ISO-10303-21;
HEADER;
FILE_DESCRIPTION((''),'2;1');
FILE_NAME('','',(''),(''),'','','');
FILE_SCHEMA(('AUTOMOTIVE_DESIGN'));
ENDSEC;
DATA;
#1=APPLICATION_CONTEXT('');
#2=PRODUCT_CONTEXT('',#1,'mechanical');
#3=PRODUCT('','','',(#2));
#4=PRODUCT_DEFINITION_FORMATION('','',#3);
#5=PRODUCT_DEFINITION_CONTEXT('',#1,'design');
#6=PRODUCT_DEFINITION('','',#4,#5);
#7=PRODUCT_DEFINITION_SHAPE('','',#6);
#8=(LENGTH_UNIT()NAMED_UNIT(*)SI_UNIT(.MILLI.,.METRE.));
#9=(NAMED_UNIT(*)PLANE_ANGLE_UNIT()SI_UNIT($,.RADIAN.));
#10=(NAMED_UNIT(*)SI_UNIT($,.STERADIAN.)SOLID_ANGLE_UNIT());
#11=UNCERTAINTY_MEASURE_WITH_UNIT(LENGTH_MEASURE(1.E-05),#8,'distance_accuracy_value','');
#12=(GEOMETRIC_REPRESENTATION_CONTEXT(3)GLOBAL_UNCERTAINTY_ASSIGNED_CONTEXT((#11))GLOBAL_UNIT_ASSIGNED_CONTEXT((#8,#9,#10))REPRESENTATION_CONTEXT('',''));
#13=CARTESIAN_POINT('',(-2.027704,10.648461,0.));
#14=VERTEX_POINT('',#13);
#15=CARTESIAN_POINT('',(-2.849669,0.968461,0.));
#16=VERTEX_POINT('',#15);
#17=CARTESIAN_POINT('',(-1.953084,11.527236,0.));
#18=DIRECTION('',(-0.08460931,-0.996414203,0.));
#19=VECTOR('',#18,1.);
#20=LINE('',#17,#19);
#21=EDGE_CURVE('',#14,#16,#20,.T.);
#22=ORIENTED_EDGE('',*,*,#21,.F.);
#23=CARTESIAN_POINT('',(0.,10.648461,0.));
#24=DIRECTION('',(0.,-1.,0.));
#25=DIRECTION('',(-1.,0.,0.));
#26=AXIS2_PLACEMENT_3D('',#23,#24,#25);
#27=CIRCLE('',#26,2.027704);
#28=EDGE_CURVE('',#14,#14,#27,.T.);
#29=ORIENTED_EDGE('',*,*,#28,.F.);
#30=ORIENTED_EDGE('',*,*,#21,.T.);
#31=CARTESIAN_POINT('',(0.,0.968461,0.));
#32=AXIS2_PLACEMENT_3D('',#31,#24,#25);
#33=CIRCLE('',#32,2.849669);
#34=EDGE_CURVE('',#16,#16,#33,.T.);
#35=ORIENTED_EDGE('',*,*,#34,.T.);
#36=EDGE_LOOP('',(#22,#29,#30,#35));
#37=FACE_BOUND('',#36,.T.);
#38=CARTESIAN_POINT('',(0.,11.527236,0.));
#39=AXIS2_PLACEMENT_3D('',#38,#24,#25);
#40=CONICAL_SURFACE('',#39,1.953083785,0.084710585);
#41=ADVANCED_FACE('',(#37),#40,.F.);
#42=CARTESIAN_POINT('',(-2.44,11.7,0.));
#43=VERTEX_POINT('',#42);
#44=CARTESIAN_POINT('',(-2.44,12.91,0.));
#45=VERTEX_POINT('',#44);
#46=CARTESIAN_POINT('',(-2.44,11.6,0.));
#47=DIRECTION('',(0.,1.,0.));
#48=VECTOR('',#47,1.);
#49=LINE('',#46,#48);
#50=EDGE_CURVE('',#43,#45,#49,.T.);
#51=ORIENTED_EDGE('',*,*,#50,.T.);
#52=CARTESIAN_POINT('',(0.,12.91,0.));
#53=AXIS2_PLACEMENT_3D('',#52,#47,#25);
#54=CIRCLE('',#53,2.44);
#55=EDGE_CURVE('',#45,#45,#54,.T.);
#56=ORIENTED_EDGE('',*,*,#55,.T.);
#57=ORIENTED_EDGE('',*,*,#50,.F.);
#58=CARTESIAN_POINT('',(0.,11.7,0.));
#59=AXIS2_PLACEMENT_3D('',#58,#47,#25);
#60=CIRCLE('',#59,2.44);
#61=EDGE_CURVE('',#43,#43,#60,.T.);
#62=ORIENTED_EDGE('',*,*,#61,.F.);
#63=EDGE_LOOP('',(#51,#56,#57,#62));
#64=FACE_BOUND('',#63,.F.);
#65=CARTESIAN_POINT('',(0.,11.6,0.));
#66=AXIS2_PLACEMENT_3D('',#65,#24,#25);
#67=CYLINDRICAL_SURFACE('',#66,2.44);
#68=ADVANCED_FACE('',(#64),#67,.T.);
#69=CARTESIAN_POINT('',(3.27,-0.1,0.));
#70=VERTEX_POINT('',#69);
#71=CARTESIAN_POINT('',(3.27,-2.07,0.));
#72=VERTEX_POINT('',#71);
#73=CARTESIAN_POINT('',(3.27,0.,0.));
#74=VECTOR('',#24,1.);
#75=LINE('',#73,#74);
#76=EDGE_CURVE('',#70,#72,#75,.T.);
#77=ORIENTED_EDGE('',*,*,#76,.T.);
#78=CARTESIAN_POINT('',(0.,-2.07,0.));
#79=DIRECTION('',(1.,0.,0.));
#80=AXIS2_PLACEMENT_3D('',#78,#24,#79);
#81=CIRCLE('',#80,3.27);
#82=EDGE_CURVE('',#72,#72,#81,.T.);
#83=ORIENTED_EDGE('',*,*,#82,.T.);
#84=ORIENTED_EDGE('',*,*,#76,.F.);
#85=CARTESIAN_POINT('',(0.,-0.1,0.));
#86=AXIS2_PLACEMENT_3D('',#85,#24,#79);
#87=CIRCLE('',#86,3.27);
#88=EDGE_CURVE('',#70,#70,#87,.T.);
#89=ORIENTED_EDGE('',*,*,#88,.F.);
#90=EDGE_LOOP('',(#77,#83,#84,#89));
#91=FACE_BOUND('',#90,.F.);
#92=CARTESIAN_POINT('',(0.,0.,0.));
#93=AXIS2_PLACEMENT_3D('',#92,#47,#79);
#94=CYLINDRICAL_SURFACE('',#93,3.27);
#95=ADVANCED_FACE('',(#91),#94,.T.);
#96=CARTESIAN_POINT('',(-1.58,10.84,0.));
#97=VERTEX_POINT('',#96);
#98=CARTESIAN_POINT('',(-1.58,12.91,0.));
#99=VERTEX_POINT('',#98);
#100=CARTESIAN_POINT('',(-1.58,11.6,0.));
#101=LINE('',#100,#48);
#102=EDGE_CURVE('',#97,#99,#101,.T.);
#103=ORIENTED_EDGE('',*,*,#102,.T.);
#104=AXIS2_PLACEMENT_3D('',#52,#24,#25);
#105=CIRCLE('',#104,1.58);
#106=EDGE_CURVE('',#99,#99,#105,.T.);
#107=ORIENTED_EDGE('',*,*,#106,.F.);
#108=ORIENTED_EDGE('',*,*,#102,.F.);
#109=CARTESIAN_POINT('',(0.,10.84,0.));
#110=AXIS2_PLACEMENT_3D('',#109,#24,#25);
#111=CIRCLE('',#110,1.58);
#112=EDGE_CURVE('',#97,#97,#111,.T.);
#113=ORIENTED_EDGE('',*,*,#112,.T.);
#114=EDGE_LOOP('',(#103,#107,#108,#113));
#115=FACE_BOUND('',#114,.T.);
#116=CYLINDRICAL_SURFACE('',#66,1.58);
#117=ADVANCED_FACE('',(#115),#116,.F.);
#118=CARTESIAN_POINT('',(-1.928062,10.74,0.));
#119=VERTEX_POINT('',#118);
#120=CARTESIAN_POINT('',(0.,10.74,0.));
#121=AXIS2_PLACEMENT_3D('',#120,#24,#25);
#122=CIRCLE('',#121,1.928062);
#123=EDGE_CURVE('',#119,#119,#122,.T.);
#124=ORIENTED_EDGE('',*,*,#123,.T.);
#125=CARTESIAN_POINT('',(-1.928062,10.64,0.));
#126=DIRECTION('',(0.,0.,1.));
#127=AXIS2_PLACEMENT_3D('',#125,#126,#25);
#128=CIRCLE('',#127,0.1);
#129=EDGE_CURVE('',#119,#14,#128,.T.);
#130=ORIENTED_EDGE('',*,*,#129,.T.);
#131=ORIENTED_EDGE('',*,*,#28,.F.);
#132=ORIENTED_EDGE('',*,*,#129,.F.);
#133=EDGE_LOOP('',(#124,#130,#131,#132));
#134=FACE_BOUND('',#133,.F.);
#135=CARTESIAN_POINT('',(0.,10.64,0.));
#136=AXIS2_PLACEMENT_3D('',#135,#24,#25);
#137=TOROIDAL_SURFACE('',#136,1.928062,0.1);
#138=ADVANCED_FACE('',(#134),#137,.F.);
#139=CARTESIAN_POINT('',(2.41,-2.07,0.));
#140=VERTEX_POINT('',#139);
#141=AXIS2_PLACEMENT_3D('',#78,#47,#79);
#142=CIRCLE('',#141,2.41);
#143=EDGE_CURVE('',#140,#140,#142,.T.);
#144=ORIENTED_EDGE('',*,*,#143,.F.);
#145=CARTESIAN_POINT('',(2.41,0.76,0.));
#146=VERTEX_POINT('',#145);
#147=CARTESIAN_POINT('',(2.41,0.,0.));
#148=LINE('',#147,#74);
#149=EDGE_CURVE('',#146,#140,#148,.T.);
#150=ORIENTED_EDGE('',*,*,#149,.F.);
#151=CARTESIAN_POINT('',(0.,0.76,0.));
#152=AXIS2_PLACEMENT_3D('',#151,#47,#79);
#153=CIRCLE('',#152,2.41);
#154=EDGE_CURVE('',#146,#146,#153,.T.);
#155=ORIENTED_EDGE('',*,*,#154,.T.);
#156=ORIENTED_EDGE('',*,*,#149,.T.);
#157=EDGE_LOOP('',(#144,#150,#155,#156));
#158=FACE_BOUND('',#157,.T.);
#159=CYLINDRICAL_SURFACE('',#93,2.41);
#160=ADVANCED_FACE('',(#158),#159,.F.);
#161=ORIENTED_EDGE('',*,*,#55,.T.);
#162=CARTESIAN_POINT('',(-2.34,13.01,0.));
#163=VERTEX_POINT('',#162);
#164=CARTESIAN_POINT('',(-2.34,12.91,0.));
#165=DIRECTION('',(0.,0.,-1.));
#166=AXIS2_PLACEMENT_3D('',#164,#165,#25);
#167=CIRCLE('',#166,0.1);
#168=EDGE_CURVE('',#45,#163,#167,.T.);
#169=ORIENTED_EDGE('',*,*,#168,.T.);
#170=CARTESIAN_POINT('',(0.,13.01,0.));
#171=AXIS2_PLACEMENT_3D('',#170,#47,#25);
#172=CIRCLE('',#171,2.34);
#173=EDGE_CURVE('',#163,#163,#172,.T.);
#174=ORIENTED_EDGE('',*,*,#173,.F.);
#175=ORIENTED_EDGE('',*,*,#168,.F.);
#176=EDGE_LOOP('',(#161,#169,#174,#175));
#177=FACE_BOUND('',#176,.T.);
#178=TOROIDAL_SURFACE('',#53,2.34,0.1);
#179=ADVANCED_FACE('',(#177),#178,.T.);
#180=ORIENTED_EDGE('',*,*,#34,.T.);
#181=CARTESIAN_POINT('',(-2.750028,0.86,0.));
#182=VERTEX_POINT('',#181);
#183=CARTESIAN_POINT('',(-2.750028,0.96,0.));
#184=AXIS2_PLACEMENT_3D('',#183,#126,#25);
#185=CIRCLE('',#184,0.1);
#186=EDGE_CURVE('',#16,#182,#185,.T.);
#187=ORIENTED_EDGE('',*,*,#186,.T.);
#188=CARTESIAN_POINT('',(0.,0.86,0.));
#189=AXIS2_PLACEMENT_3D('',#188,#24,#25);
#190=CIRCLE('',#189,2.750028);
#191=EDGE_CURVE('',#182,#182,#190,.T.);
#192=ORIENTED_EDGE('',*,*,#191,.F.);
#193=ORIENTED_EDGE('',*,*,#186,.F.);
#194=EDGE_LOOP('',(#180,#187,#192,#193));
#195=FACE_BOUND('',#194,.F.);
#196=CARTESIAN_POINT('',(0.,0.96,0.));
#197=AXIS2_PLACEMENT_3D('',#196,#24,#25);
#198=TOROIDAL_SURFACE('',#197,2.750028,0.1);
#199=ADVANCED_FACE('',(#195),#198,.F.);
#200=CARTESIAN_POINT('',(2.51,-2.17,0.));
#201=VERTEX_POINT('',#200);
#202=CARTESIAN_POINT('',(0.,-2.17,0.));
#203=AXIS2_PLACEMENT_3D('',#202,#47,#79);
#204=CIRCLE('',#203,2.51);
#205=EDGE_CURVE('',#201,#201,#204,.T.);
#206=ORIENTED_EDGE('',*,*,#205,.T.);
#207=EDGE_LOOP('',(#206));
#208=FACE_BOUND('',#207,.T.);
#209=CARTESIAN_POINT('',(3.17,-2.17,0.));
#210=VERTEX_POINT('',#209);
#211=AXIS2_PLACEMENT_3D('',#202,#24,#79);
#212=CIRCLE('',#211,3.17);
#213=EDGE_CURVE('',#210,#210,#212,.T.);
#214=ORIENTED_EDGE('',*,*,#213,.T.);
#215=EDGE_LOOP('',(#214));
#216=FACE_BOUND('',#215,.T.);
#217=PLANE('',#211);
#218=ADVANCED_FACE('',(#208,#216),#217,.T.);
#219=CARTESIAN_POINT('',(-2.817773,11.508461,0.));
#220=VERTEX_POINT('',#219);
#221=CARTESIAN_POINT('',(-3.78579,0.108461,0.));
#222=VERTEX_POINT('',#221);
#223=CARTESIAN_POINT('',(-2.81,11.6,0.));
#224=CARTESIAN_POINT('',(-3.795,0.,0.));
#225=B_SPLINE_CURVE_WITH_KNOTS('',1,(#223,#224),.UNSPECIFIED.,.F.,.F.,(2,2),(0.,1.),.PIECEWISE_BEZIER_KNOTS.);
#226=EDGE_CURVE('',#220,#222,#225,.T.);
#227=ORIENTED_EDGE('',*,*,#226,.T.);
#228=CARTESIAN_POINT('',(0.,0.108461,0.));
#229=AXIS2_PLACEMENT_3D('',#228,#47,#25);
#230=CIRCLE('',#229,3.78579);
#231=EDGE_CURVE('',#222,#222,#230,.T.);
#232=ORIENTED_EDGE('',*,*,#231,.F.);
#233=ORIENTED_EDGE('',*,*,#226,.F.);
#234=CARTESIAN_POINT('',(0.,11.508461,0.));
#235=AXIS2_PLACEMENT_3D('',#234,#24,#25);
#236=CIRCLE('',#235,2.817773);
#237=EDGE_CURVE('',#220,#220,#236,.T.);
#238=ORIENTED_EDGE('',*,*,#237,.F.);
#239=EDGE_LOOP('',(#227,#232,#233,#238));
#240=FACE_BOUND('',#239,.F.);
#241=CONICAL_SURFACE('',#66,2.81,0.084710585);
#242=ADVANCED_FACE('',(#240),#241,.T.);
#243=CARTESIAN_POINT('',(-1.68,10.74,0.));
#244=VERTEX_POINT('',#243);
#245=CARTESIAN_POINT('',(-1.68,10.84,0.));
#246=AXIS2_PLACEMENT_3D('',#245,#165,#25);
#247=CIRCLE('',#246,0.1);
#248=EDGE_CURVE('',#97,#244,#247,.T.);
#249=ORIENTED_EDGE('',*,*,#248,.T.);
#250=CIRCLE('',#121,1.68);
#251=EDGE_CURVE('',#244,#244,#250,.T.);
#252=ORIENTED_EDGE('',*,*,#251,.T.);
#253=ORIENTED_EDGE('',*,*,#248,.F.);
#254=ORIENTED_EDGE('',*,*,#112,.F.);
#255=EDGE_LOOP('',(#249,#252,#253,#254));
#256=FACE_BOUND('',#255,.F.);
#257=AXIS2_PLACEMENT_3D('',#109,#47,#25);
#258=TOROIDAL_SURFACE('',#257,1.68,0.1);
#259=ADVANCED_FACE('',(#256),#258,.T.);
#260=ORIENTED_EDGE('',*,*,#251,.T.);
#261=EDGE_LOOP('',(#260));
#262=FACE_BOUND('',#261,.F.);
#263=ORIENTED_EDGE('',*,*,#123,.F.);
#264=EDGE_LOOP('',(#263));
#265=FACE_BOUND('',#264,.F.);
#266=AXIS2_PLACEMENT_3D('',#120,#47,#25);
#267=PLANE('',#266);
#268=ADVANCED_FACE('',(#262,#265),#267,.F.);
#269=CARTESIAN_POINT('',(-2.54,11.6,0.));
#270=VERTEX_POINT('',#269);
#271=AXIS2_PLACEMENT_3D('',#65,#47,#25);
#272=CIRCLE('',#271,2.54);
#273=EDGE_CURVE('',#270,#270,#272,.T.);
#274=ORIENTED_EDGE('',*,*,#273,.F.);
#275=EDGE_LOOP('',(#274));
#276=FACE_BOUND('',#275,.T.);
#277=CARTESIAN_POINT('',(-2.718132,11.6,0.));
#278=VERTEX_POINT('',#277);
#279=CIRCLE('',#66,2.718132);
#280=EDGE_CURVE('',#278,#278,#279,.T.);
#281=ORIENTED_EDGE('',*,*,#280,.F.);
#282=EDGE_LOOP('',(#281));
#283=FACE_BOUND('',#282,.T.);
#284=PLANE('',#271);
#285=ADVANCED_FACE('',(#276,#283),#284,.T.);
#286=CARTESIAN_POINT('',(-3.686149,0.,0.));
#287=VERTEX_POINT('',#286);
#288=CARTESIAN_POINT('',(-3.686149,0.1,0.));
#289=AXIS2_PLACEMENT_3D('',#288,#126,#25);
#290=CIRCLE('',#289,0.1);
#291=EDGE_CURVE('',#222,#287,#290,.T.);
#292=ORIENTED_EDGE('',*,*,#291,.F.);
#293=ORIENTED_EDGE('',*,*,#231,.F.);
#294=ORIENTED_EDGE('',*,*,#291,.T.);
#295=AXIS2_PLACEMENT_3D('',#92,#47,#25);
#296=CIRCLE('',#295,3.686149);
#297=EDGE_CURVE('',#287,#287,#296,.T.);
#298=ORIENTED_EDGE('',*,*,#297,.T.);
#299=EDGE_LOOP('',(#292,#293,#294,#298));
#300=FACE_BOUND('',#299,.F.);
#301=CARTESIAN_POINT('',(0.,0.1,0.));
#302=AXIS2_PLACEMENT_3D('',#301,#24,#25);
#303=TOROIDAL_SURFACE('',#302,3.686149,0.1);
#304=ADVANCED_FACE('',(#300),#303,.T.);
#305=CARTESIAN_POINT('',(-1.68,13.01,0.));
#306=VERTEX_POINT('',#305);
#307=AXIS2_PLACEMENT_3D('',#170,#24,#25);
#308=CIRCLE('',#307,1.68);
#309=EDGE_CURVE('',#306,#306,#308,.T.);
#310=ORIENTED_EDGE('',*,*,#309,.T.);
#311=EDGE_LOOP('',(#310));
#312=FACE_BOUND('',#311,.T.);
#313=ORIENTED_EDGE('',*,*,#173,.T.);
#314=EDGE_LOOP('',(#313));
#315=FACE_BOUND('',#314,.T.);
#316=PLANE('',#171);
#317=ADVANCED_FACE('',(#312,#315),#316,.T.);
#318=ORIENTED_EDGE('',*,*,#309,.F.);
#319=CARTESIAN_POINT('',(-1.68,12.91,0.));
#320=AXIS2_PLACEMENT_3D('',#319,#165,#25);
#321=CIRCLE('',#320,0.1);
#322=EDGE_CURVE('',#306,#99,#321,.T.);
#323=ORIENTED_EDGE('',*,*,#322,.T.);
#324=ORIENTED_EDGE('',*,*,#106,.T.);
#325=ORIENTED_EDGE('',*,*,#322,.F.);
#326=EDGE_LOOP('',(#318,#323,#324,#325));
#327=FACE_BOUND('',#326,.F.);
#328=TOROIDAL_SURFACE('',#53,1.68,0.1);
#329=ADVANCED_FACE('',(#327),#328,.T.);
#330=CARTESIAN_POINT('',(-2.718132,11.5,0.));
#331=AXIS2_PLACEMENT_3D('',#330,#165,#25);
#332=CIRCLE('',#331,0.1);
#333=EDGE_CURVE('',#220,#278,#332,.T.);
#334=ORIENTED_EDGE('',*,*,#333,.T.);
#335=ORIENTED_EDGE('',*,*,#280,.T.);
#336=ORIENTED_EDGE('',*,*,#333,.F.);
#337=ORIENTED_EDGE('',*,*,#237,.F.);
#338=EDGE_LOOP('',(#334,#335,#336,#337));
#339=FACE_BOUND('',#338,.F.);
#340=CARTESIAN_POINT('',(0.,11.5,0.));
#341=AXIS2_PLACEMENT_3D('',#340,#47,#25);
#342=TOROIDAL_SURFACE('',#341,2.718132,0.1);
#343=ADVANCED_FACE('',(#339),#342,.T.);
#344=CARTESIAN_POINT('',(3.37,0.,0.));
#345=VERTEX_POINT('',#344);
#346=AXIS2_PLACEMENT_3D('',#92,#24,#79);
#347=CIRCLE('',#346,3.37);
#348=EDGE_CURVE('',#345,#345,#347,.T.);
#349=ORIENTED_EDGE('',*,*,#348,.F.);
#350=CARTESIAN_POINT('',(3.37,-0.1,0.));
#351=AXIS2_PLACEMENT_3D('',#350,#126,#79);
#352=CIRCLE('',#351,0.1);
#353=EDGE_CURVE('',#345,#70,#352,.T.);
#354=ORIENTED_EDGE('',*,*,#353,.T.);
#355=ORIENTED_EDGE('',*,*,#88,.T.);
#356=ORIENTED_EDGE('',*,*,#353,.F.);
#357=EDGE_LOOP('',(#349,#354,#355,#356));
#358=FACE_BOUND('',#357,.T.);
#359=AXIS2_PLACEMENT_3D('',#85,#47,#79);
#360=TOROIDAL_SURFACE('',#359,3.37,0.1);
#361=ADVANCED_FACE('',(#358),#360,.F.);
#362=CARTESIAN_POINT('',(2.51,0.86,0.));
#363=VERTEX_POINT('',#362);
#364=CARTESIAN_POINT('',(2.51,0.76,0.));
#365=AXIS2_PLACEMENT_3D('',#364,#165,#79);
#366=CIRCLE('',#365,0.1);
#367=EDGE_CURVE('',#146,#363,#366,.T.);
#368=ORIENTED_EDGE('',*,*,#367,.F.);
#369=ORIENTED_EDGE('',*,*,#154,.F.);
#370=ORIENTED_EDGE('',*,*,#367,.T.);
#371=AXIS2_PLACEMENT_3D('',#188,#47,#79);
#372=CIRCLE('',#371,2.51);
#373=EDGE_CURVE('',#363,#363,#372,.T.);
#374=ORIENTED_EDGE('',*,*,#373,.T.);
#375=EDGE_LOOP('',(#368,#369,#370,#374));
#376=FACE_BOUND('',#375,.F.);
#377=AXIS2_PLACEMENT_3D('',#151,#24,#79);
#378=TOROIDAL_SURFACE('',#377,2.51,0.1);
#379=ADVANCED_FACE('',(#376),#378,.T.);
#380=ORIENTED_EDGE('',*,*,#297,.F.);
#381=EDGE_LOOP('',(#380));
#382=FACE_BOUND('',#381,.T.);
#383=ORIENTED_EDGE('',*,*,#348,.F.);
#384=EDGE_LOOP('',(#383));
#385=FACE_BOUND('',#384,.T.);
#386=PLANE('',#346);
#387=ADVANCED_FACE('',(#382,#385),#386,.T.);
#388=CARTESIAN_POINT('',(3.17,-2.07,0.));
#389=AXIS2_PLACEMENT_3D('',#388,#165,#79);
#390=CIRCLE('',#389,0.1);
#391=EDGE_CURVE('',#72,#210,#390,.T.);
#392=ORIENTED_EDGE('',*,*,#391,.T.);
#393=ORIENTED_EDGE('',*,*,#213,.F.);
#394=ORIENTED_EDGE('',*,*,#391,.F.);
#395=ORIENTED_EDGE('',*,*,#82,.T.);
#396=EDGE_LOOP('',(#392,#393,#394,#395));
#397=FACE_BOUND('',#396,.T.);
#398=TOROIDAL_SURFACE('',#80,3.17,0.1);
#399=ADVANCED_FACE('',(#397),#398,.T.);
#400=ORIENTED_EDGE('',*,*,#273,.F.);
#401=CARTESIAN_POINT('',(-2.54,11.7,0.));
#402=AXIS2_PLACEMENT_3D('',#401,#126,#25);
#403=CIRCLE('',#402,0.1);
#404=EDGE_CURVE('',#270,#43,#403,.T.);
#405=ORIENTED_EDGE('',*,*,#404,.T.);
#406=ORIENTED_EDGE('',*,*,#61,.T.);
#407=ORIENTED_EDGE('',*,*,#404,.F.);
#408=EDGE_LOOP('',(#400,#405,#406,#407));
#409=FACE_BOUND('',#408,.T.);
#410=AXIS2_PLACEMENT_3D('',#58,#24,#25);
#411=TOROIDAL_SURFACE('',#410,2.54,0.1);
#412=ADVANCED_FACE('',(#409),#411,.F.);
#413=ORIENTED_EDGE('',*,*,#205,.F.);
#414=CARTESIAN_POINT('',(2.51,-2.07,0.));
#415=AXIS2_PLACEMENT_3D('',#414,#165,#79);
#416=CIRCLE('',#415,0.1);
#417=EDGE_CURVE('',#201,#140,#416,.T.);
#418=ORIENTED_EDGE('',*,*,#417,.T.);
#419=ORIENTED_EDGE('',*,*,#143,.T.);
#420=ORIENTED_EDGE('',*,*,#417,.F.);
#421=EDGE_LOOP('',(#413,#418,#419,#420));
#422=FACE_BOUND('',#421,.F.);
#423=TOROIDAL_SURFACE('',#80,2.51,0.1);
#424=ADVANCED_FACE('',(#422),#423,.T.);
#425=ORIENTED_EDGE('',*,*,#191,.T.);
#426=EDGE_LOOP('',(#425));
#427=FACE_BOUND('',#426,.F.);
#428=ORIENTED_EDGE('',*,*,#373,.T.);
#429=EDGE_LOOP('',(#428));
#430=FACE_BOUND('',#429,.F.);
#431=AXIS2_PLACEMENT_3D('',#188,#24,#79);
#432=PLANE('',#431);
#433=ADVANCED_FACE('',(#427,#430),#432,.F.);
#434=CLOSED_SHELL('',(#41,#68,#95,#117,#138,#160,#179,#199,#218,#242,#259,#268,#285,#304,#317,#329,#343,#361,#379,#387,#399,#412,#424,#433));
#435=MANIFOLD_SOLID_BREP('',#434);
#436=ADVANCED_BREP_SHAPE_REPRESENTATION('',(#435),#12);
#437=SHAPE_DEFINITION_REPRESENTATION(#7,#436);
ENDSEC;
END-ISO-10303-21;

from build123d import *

# Parameters (mm, degrees)
F0_R       = 3.795
F1_DEPTH   = 11.6
F2_R       = 2.81
F1_FACE1_R = 3.795
F4_R       = 2.44
F5_DEPTH   = 1.41
F6_R       = 3.27
F7_DEPTH   = 2.17
F8_T       = -0.86
F9_R       = 0.1


with BuildPart() as f1:
    # F0 (on Front) → F1 (new body)
    with BuildSketch(Plane.XZ):
        Circle(F0_R)
    extrude(amount=-F1_DEPTH)

    # F2 (on face) → F3 section 0
    with BuildSketch(Plane(origin=(0, 11.6, 0), x_dir=(-1, 0, 0), z_dir=(0, 1, 0))):
        Circle(F2_R)
    # F1_face1 (on face) → F3 section 1
    with BuildSketch(Plane.XZ):
        Circle(F1_FACE1_R)
    loft(mode=Mode.INTERSECT)

    # F4 (on face) → F5 (join)
    with BuildSketch(Plane(origin=(0, 11.6, 0), x_dir=(-1, 0, 0), z_dir=(0, 1, 0))):
        Circle(F4_R)
    extrude(amount=F5_DEPTH)

    # F6 (on face) → F7 (join)
    with BuildSketch(Plane.XZ):
        Circle(F6_R)
    extrude(amount=F7_DEPTH)

    # F8
    f8_openings = [f1.faces().sort_by_distance(p)[0] for p in [
        (0, 13.01, 0),
        (0, -2.17, 0),
    ]]
    offset(amount=F8_T, openings=f8_openings, kind=Kind.INTERSECTION)

    # F9
    f9_edges = [f1.edges().sort_by_distance(p)[0] for p in [
        (-3.27, 0, 0),
        (2.81, 11.6, 0),
        (-3.27, -2.17, 0),
        (3.795, 0, 0),
        (2.44, 13.01, 0),
        (-2.41, 0.86, 0),
        (-2.41, -2.17, 0),
        (2.44, 11.6, 0),
        (2.858879, 0.86, 0),
        (1.58, 13.01, 0),
        (1.58, 10.74, 0),
        (2.019931, 10.74, 0),
    ]]
    fillet(f9_edges, radius=F9_R)


solid = f1.part
